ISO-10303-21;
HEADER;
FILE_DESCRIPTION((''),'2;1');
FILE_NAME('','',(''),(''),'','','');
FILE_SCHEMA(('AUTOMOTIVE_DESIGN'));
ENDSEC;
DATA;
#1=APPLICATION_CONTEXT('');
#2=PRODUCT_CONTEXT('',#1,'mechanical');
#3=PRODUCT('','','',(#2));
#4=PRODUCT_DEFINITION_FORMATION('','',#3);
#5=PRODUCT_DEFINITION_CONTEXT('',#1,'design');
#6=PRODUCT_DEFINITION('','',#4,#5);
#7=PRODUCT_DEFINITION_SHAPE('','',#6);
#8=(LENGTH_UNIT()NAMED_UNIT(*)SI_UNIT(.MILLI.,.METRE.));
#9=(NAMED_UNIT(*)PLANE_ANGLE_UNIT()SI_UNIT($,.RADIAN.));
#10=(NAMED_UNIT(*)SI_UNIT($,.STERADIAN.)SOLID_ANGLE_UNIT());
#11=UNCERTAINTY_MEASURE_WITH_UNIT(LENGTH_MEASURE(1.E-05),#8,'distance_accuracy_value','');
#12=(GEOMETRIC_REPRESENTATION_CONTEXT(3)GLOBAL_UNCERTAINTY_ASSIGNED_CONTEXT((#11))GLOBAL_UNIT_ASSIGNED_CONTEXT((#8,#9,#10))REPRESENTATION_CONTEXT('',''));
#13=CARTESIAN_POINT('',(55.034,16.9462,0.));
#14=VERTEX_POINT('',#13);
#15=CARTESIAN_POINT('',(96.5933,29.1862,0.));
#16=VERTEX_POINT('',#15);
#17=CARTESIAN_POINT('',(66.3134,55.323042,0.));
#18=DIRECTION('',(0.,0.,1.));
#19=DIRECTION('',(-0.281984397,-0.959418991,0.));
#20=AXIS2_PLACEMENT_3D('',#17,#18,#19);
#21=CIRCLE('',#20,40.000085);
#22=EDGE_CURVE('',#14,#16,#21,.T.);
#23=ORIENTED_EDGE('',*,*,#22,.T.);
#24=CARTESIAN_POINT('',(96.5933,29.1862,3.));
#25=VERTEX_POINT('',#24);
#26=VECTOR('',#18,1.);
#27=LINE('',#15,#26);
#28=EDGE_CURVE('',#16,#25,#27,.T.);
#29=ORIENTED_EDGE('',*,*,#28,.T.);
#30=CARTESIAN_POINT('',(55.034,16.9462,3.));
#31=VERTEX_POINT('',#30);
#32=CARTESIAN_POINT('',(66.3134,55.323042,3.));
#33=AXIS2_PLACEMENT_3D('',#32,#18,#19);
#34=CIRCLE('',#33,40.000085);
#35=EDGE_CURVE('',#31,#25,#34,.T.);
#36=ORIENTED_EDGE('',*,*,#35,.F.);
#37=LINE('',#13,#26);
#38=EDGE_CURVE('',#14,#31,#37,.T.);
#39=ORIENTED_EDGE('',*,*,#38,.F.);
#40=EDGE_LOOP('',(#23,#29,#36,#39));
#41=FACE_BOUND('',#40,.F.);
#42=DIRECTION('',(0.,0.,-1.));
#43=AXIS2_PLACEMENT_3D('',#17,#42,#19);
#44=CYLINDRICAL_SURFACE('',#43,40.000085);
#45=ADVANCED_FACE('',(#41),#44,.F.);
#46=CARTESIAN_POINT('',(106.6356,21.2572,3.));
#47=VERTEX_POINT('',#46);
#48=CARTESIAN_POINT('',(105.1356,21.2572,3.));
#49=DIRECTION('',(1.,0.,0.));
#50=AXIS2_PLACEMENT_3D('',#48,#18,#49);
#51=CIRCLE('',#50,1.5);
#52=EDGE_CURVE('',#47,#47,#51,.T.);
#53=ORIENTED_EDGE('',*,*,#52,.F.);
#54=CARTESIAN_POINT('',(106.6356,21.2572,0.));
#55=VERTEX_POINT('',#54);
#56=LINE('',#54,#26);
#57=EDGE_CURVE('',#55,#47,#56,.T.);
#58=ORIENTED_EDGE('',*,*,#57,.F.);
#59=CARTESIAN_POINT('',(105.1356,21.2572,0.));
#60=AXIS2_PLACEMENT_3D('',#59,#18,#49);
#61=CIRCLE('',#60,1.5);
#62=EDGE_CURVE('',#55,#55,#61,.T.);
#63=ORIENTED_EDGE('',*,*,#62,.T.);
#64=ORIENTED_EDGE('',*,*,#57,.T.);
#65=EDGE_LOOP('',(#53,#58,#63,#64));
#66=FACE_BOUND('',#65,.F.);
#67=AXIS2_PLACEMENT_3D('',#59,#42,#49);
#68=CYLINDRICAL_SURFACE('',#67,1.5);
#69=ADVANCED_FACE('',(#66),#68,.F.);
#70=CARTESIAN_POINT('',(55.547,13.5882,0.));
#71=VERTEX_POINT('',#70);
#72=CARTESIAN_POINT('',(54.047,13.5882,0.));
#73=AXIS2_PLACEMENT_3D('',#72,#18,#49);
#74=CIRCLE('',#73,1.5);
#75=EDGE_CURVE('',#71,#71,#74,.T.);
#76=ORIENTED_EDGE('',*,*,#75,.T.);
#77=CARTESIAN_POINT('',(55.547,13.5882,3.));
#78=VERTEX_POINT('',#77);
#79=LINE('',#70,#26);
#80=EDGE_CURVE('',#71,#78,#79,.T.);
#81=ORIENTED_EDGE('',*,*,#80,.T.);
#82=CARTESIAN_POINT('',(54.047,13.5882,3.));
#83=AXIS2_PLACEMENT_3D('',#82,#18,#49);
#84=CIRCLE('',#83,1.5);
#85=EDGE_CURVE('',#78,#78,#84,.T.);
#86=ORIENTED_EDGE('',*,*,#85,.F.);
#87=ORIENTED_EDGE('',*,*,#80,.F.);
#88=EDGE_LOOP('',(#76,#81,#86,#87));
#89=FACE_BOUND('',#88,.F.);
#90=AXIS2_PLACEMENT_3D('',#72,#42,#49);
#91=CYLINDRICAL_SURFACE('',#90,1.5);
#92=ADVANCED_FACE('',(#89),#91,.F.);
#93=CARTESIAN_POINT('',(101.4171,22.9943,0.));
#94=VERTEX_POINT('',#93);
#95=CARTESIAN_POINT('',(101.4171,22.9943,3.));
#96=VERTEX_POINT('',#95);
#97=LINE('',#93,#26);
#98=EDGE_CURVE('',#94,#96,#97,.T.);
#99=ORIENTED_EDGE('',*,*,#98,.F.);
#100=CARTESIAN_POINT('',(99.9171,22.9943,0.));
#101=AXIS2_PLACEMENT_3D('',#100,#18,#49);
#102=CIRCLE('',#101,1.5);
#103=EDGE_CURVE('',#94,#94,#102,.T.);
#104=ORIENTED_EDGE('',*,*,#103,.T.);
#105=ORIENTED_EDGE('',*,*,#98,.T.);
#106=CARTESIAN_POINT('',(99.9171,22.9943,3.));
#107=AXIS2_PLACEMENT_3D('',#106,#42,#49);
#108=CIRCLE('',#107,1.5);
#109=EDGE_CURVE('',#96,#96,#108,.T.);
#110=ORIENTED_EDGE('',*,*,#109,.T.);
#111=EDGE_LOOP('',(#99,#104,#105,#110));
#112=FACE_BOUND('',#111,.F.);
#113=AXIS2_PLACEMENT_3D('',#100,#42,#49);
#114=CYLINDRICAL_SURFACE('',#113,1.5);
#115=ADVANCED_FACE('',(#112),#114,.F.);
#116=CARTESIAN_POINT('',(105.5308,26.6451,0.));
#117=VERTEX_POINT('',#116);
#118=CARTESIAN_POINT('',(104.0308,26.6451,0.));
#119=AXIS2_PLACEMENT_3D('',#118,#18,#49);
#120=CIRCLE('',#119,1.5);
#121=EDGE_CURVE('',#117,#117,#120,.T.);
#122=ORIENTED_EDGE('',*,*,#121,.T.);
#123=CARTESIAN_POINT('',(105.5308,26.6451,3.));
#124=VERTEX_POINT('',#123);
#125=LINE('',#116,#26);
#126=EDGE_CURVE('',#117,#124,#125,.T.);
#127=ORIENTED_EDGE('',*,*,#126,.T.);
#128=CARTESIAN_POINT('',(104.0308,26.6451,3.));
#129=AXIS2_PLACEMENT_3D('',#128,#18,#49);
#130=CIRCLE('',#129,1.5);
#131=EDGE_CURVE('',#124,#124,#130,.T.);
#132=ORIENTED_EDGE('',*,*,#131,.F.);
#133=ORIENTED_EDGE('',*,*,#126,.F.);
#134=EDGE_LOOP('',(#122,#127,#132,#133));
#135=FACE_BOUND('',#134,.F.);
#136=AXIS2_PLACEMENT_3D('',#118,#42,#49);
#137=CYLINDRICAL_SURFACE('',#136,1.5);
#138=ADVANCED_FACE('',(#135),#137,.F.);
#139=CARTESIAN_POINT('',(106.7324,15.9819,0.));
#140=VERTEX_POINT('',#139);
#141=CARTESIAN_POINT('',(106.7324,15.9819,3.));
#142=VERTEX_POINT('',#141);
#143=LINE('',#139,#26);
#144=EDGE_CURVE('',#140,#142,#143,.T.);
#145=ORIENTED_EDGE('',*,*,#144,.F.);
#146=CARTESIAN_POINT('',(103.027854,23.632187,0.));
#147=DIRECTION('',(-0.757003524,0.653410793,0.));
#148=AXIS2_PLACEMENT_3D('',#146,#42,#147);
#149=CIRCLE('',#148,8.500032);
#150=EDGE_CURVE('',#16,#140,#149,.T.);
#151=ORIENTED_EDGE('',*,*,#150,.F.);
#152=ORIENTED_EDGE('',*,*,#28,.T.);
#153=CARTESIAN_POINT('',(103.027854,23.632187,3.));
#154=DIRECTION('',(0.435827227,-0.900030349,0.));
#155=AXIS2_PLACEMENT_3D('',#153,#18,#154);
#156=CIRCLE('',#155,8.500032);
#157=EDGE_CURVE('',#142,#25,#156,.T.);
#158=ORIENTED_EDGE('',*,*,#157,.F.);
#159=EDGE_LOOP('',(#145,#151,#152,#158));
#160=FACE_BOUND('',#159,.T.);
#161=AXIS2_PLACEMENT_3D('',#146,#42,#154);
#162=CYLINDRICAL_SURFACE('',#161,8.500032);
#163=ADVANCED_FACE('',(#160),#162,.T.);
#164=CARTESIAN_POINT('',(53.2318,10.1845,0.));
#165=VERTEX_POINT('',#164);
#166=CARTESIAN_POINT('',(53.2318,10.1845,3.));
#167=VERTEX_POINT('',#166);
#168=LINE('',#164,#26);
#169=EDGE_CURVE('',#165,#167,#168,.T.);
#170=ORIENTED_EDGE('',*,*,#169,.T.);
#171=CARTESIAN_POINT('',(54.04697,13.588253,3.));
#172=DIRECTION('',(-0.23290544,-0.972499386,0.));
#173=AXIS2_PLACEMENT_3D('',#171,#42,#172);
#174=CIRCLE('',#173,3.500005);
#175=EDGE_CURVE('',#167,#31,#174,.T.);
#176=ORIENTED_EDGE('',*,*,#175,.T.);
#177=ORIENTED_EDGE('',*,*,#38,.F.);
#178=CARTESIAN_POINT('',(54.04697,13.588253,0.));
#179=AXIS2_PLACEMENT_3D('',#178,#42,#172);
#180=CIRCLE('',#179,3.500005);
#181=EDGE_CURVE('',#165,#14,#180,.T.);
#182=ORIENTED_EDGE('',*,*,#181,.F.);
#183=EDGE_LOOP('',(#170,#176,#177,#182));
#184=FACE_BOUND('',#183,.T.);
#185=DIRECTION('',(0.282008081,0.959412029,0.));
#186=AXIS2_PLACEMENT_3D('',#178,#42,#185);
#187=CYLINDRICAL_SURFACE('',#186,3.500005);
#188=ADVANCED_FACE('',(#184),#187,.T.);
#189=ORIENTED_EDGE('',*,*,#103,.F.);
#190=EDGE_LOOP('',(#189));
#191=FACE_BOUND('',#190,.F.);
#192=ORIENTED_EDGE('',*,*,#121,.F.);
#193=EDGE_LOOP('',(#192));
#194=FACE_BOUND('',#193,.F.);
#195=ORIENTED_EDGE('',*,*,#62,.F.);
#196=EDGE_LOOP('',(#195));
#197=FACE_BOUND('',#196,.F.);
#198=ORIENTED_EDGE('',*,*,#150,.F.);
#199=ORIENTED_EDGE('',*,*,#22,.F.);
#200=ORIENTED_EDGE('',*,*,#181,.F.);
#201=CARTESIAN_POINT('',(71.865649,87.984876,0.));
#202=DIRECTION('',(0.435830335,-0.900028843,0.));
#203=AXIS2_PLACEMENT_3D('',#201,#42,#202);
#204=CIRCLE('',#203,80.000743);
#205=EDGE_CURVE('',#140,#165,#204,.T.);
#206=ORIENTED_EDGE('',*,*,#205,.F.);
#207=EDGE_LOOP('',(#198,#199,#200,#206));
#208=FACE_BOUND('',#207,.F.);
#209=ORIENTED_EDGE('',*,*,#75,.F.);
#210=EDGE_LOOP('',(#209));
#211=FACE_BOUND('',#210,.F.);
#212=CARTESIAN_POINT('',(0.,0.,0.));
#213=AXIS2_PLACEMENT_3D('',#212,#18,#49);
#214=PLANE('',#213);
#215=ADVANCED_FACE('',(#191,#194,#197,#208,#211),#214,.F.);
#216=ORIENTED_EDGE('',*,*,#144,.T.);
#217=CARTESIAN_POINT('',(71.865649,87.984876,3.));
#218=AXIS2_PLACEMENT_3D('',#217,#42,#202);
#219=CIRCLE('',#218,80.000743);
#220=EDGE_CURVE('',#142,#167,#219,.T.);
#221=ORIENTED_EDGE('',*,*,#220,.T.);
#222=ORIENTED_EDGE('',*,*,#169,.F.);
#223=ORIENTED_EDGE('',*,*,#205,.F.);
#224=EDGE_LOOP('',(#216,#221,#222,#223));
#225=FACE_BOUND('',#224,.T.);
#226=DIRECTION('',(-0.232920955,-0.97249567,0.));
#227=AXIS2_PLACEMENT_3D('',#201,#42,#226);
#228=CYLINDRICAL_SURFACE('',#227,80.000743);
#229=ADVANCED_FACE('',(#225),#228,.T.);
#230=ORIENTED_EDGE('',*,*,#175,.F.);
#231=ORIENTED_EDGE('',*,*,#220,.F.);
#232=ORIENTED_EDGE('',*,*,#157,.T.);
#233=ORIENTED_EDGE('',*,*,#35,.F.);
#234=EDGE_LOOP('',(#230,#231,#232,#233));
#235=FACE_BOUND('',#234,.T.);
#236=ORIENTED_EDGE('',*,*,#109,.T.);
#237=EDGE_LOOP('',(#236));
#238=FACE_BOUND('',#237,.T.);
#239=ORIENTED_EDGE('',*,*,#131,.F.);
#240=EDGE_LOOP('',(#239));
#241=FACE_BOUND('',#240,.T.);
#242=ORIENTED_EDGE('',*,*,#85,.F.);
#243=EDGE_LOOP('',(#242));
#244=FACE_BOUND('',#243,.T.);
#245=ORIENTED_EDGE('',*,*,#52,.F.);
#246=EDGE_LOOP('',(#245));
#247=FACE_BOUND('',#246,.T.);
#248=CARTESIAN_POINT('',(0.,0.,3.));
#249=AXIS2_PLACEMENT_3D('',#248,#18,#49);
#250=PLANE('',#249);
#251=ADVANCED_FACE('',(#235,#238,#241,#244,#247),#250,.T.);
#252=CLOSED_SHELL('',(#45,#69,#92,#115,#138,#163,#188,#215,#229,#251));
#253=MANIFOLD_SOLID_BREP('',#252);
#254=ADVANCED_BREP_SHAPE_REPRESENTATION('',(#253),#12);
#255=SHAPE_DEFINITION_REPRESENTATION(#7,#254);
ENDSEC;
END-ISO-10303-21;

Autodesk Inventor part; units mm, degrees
ref_plane "YZ Plane" through (0, 0, 0) normal (1, 0, 0) x (0, 1, 0)
ref_plane "XZ Plane" through (0, 0, 0) normal (0, 1, 0) x (-1, 0, 0)
ref_plane "XY Plane" through (0, 0, 0) normal (0, 0, 1) x (1, 0, 0)
sketch "スケッチ1" plane through (0, 0, 0) normal (0, 0, 1) x (1, 0, 0)
  line L0 (-170.6512, -31.4118) -> (202.8656, -31.4118) construction
  circle A0 centre (-14, -17.4118) radius 14 construction
  circle A1 centre (14, -17.4118) radius 14 construction
  circle A2 centre (-28.0204, 0.0121) radius 20.05 construction
  circle A3 centre (-28.0204, 0.0121) radius 5.05 construction
  circle A4 centre (8.8763, 3.8907) radius 32.05 construction
  circle A5 centre (8.8763, 3.8907) radius 10.1 construction
  circle A6 centre (54.047, 13.5882) radius 36.1 construction
  line L1 (-170.915, -81.4118) -> (490.0044, -81.4118)
  circle A7 centre (-28.0204, 0.0121) radius 22.342 construction
  circle A8 centre (-39.4931, 19.1835) radius 14 construction
  circle A9 centre (-49.0547, 7.5438) radius 14 construction
  circle A10 centre (-49.0547, -7.5196) radius 14 construction
  circle A11 centre (-39.4931, -19.1593) radius 14 construction
  circle A12 centre (8.8763, 3.8907) radius 33.05 construction
  circle A13 centre (54.047, 13.5882) radius 38.1 construction
  line L2 (-11.5565, -29.1593) -> (4.2969, -29.1593) construction
  line L3 (-67.2952, 44.8622) -> (-67.2952, -57.3934) construction
  line L4 (-149.4523, -1.6098) -> (-132.6633, -31.6026)
  line L5 (-132.7701, -31.4118) -> (-132.7701, 74.0456)
  circle A14 centre (-11.4931, -19.1593) radius 14 construction
  line L6 (-197.2268, -33.1593) -> (179.6604, -33.1593) construction
  circle A15 centre (54.047, 13.5882) radius 4.025
  circle A16 centre (54.047, 13.5882) radius 6
  circle A17 centre (-39.4931, 19.1835) radius 5
  circle A18 centre (-49.0547, 7.5438) radius 5
  circle A19 centre (-49.0547, -7.5196) radius 5
  circle A20 centre (-39.4931, -19.1593) radius 5
  circle A21 centre (-39.4931, 19.1835) radius 8 construction
  circle A22 centre (-49.0547, 7.5438) radius 8 construction
  circle A23 centre (-49.0547, -7.5196) radius 8 construction
  circle A24 centre (-39.4931, -19.1593) radius 8 construction
  circle A25 centre (-28.0204, 0.0121) radius 4.5
  circle A26 centre (8.8763, 3.8907) radius 7.5
  line L7 (-17.5497, 32.3149) -> (-46.3578, 15.0755) construction
  line L8 (-46.3578, 15.0755) -> (-51.7515, 0.0121) construction
  line L9 (-51.7515, 0.0121) -> (-46.3578, -15.0513) construction
  line L10 (-46.3578, -15.0513) -> (-37.9391, -20.0892) construction
  circle A27 centre (-32.6283, 23.2915) radius 1.3
  circle A28 centre (-46.3578, 15.0755) radius 1.3
  circle A29 centre (-51.7515, 0.0121) radius 1.3
  circle A30 centre (-46.3578, -15.0513) radius 1.3
  circle A31 centre (-32.6283, -23.2673) radius 1.3
  line L11 (-67.2952, 23.1796) -> (-67.2952, -18.1327)
  arc A32 (79.2003, -37.212) -> (87.3507, -31.2711) centre (80.4159, -30.3183) ccw
  arc A33 (8.1864, 50.8943) -> (0.9804, 51.9708) centre (3.7003, 45.5208) ccw
  line L12 (-52.2685, -33.1593) -> (56.2168, -33.1593)
  line L13 (56.2168, -33.1593) -> (79.2003, -37.212)
  arc A34 (92.7831, 8.2659) -> (29.742, 44.2162) centre (54.047, 13.5882) ccw
  line L14 (87.3507, -31.2711) -> (92.7831, 8.2659)
  line L15 (0.9804, 51.9708) -> (-67.2952, 23.1796)
  circle A35 centre (34.0114, -24.0061) radius 4.5 construction
  circle A36 centre (34.0114, -24.0061) radius 1.5
  circle A37 centre (-21.4477, 26.0369) radius 4.5 construction
  circle A38 centre (-21.4477, 26.0369) radius 1.5
  circle A39 centre (-56.0504, 23.0377) radius 1.5
  circle A40 centre (-56.0504, 23.0377) radius 3 construction
  circle A41 centre (-56.0504, 23.0377) radius 4.5 construction
  circle A42 centre (-64.2952, 0.0121) radius 1.5
  circle A43 centre (-64.2952, 0.0121) radius 3 construction
  circle A44 centre (-64.2952, 0.0121) radius 4.3311 construction
  line L16 (54.047, 13.5882) -> (103.0278, 23.6322)
  line L17 (103.0278, 23.6322) -> (59.4403, 12.4461)
  line L18 (59.4403, 12.4461) -> (30.7326, 32.4678)
  line L19 (30.7326, 32.4678) -> (54.047, 13.5882)
  line L20 (103.0278, 23.6322) -> (519.5307, 130.5215)
  line L21 (-183.2789, 162.2213) -> (-183.2789, -125.2315)
  line L22 (516.7211, 155.5913) -> (516.7211, -155.5644)
  circle A45 centre (103.0278, 23.6322) radius 7.25
  arc A46 (101.805, 33.809) -> (106.8568, 14.1242) centre (103.0278, 23.6322) ccw
  line L23 (141.7723, 33.5754) -> (440.8907, 56.5571) construction
  line L24 (241.9124, 41.2693) -> (202.3713, 99.0317) construction
  circle A47 centre (3.7003, 45.5208) radius 4
  circle A48 centre (127.2431, 29.8467) radius 2
  circle A49 centre (141.7723, 33.5754) radius 2
  arc A50 (143.6401, 28.9373) -> (141.1758, 38.5397) centre (141.7723, 33.5754) ccw
  line L25 (143.6401, 28.9373) -> (106.8568, 14.1242)
  line L26 (141.1758, 38.5397) -> (101.805, 33.809)
  circle A51 centre (30.7326, 32.4678) radius 2
  circle A52 centre (-16.1798, -24.0771) radius 4.5 construction
  circle A53 centre (-16.1798, -24.0771) radius 1.5
  line L27 (-67.2952, -18.1327) -> (-52.2685, -33.1593)
  circle A54 centre (-56.0504, -23.0135) radius 1.5
  circle A55 centre (-56.0504, -23.0135) radius 3 construction
  circle A56 centre (30.7326, 32.4678) radius 4
  arc A57 (55.034, 16.9462) -> (53.2318, 10.1845) centre (54.047, 13.5882) ccw
  line L28 (99.9171, 22.9943) -> (104.0308, 26.6451) construction
  line L29 (104.0308, 26.6451) -> (105.1356, 21.2572) construction
  line L30 (105.1356, 21.2572) -> (99.9171, 22.9943) construction
  circle A58 centre (105.1356, 21.2572) radius 1.5
  circle A59 centre (104.0308, 26.6451) radius 1.5
  circle A60 centre (99.9171, 22.9943) radius 1.5
  circle A61 centre (103.0278, 23.6322) radius 6
  arc A62 (106.7324, 15.9819) -> (96.5933, 29.1862) centre (103.0278, 23.6322) ccw
  arc A63 (55.034, 16.9462) -> (96.5933, 29.1862) centre (66.3134, 55.3229) ccw
  arc A64 (53.2318, 10.1845) -> (106.7324, 15.9819) centre (71.8656, 87.9841) ccw
  circle A65 centre (54.047, 13.5882) radius 8.5
  line L31 (101.3203, 31.9589) -> (52.3395, 21.9149)
  line L32 (55.7545, 5.2615) -> (104.7353, 15.3054)
  circle A66 centre (12.7384, 41.2415) radius 3 construction
  circle A67 centre (12.7384, 41.2415) radius 4.5 construction
  circle A68 centre (12.7384, 41.2415) radius 1.5
  circle A69 centre (80.4159, -30.3183) radius 4
  circle A70 centre (69.7531, -26.0108) radius 1.5
  circle A71 centre (69.7531, -26.0108) radius 4.5 construction
  circle A72 centre (-56.0504, -23.0135) radius 4.5 construction
  line L33 (8.1864, 50.8943) -> (15.9809, 44.3871)
  arc A73 (15.9809, 44.3871) -> (29.742, 44.2162) centre (22.9664, 52.7545) ccw
  circle A74 centre (-5.4761, 38.5895) radius 1.5
  circle A75 centre (-5.4761, 38.5895) radius 4.5 construction
  circle A76 centre (54.047, 13.5882) radius 50 construction
  circle A77 centre (3.7003, 45.5208) radius 2
  circle A78 centre (80.4159, -30.3183) radius 2
  circle A79 centre (54.047, 13.5882) radius 1.5
  point P0 (0, 0)
  point P1 (0, 0)
  point P2 (-49.0547, 7.5438)
  point P3 (-49.0547, -7.5196)
  dimension "d89" = 100
  dimension "d0" = 40.1
  dimension "d1" = 10.1
  dimension "d2" = 64.1
  dimension "d3" = 20.2
  dimension "d4" = 72.2
  dimension "d5" = 95
  dimension "d6" = 44.684
  dimension "d7" = 28
  dimension "d8" = 28
  dimension "d9" = 28
  dimension "d10" = 28
  dimension "d11" = 1
  dimension "d12" = 2
  dimension "d13" = 4
  dimension "d14" = 8.05
  dimension "d15" = 12
  dimension "d16" = 10
  dimension "d17" = 10
  dimension "d18" = 10
  dimension "d19" = 10
  dimension "d20" = 3
  dimension "d21" = 3
  dimension "d22" = 3
  dimension "d23" = 3
  dimension "d24" = 9
  dimension "d25" = 15
  dimension "d26" = 2.6
  dimension "d27" = 2.6
  dimension "d28" = 2.6
  dimension "d29" = 2.6
  dimension "d30" = 2.6
  dimension "d31" = 1
  dimension "d32" = 9
  dimension "d33" = 3
  dimension "d34" = 9
  dimension "d35" = 3
  dimension "d36" = 3
  dimension "d37" = 6
  dimension "d38" = 9
  dimension "d39" = 3
  dimension "d40" = 6
  dimension "d41" = 50
  dimension "d42" = 45
  dimension "d43" = 35
  dimension "d44" = 30
  dimension "d45" = 39
  dimension "d46" = 430
  dimension "d47" = 700
  dimension "d48" = 14.5
  dimension "d49" = 3
  dimension "d50" = 300
  dimension "d51" = 10
  dimension "d52" = 70
  dimension "d53" = 120
  dimension "d54" = 140
  dimension "d55" = 8
  dimension "d56" = 4
  dimension "d57" = 4
  dimension "d58" = 15
  dimension "d59" = 25
  dimension "d60" = 10
  dimension "d61" = 4
  dimension "d62" = 9
  dimension "d63" = 3
extrude "押し出し1" add sketch "スケッチ1" along normal blind 3 contours A15 L18 L16 | A15 L16 A16 L17 L18 | L16 L18 A57 A63 A15 | A15 A63 A16 L16 | L18 L17 A16 A64 A15 | A15 A64 A57 L19 A79 L16 L18 | L16 A79 L19 A57 L18 | L16 A65 L17 A16 | A16 A63 A65 L16 | A65 A63 L16 | L16 A63 L17 A65 | A16 L17 A65 A64 | A65 L17 A63 A34 L32 A64 | A63 A34 L16 | L16 A34 L17 A63 | L32 A34 A64 | L16 A46 L17 A34 | A34 A63 A46 L16 | A34 L32 A46 A64 | A34 L17 A46 L32 | A46 A63 A62 L20 A45 L16 | L16 A45 L17 A46 | A46 L17 A45 L20 A62 A64 | A45 L20 A61 L16 | L16 A61 L17 A45 | L17 A61 L20 A45 | A61 L20 L16 A60 | L16 A60 L17 A61 | L17 A60 L20 A61 | L16 L17 A60 picked at (101.9354, 23.3989)
properties part number "アーム駆動抑え" material "アルミニウム 2014-T4"
